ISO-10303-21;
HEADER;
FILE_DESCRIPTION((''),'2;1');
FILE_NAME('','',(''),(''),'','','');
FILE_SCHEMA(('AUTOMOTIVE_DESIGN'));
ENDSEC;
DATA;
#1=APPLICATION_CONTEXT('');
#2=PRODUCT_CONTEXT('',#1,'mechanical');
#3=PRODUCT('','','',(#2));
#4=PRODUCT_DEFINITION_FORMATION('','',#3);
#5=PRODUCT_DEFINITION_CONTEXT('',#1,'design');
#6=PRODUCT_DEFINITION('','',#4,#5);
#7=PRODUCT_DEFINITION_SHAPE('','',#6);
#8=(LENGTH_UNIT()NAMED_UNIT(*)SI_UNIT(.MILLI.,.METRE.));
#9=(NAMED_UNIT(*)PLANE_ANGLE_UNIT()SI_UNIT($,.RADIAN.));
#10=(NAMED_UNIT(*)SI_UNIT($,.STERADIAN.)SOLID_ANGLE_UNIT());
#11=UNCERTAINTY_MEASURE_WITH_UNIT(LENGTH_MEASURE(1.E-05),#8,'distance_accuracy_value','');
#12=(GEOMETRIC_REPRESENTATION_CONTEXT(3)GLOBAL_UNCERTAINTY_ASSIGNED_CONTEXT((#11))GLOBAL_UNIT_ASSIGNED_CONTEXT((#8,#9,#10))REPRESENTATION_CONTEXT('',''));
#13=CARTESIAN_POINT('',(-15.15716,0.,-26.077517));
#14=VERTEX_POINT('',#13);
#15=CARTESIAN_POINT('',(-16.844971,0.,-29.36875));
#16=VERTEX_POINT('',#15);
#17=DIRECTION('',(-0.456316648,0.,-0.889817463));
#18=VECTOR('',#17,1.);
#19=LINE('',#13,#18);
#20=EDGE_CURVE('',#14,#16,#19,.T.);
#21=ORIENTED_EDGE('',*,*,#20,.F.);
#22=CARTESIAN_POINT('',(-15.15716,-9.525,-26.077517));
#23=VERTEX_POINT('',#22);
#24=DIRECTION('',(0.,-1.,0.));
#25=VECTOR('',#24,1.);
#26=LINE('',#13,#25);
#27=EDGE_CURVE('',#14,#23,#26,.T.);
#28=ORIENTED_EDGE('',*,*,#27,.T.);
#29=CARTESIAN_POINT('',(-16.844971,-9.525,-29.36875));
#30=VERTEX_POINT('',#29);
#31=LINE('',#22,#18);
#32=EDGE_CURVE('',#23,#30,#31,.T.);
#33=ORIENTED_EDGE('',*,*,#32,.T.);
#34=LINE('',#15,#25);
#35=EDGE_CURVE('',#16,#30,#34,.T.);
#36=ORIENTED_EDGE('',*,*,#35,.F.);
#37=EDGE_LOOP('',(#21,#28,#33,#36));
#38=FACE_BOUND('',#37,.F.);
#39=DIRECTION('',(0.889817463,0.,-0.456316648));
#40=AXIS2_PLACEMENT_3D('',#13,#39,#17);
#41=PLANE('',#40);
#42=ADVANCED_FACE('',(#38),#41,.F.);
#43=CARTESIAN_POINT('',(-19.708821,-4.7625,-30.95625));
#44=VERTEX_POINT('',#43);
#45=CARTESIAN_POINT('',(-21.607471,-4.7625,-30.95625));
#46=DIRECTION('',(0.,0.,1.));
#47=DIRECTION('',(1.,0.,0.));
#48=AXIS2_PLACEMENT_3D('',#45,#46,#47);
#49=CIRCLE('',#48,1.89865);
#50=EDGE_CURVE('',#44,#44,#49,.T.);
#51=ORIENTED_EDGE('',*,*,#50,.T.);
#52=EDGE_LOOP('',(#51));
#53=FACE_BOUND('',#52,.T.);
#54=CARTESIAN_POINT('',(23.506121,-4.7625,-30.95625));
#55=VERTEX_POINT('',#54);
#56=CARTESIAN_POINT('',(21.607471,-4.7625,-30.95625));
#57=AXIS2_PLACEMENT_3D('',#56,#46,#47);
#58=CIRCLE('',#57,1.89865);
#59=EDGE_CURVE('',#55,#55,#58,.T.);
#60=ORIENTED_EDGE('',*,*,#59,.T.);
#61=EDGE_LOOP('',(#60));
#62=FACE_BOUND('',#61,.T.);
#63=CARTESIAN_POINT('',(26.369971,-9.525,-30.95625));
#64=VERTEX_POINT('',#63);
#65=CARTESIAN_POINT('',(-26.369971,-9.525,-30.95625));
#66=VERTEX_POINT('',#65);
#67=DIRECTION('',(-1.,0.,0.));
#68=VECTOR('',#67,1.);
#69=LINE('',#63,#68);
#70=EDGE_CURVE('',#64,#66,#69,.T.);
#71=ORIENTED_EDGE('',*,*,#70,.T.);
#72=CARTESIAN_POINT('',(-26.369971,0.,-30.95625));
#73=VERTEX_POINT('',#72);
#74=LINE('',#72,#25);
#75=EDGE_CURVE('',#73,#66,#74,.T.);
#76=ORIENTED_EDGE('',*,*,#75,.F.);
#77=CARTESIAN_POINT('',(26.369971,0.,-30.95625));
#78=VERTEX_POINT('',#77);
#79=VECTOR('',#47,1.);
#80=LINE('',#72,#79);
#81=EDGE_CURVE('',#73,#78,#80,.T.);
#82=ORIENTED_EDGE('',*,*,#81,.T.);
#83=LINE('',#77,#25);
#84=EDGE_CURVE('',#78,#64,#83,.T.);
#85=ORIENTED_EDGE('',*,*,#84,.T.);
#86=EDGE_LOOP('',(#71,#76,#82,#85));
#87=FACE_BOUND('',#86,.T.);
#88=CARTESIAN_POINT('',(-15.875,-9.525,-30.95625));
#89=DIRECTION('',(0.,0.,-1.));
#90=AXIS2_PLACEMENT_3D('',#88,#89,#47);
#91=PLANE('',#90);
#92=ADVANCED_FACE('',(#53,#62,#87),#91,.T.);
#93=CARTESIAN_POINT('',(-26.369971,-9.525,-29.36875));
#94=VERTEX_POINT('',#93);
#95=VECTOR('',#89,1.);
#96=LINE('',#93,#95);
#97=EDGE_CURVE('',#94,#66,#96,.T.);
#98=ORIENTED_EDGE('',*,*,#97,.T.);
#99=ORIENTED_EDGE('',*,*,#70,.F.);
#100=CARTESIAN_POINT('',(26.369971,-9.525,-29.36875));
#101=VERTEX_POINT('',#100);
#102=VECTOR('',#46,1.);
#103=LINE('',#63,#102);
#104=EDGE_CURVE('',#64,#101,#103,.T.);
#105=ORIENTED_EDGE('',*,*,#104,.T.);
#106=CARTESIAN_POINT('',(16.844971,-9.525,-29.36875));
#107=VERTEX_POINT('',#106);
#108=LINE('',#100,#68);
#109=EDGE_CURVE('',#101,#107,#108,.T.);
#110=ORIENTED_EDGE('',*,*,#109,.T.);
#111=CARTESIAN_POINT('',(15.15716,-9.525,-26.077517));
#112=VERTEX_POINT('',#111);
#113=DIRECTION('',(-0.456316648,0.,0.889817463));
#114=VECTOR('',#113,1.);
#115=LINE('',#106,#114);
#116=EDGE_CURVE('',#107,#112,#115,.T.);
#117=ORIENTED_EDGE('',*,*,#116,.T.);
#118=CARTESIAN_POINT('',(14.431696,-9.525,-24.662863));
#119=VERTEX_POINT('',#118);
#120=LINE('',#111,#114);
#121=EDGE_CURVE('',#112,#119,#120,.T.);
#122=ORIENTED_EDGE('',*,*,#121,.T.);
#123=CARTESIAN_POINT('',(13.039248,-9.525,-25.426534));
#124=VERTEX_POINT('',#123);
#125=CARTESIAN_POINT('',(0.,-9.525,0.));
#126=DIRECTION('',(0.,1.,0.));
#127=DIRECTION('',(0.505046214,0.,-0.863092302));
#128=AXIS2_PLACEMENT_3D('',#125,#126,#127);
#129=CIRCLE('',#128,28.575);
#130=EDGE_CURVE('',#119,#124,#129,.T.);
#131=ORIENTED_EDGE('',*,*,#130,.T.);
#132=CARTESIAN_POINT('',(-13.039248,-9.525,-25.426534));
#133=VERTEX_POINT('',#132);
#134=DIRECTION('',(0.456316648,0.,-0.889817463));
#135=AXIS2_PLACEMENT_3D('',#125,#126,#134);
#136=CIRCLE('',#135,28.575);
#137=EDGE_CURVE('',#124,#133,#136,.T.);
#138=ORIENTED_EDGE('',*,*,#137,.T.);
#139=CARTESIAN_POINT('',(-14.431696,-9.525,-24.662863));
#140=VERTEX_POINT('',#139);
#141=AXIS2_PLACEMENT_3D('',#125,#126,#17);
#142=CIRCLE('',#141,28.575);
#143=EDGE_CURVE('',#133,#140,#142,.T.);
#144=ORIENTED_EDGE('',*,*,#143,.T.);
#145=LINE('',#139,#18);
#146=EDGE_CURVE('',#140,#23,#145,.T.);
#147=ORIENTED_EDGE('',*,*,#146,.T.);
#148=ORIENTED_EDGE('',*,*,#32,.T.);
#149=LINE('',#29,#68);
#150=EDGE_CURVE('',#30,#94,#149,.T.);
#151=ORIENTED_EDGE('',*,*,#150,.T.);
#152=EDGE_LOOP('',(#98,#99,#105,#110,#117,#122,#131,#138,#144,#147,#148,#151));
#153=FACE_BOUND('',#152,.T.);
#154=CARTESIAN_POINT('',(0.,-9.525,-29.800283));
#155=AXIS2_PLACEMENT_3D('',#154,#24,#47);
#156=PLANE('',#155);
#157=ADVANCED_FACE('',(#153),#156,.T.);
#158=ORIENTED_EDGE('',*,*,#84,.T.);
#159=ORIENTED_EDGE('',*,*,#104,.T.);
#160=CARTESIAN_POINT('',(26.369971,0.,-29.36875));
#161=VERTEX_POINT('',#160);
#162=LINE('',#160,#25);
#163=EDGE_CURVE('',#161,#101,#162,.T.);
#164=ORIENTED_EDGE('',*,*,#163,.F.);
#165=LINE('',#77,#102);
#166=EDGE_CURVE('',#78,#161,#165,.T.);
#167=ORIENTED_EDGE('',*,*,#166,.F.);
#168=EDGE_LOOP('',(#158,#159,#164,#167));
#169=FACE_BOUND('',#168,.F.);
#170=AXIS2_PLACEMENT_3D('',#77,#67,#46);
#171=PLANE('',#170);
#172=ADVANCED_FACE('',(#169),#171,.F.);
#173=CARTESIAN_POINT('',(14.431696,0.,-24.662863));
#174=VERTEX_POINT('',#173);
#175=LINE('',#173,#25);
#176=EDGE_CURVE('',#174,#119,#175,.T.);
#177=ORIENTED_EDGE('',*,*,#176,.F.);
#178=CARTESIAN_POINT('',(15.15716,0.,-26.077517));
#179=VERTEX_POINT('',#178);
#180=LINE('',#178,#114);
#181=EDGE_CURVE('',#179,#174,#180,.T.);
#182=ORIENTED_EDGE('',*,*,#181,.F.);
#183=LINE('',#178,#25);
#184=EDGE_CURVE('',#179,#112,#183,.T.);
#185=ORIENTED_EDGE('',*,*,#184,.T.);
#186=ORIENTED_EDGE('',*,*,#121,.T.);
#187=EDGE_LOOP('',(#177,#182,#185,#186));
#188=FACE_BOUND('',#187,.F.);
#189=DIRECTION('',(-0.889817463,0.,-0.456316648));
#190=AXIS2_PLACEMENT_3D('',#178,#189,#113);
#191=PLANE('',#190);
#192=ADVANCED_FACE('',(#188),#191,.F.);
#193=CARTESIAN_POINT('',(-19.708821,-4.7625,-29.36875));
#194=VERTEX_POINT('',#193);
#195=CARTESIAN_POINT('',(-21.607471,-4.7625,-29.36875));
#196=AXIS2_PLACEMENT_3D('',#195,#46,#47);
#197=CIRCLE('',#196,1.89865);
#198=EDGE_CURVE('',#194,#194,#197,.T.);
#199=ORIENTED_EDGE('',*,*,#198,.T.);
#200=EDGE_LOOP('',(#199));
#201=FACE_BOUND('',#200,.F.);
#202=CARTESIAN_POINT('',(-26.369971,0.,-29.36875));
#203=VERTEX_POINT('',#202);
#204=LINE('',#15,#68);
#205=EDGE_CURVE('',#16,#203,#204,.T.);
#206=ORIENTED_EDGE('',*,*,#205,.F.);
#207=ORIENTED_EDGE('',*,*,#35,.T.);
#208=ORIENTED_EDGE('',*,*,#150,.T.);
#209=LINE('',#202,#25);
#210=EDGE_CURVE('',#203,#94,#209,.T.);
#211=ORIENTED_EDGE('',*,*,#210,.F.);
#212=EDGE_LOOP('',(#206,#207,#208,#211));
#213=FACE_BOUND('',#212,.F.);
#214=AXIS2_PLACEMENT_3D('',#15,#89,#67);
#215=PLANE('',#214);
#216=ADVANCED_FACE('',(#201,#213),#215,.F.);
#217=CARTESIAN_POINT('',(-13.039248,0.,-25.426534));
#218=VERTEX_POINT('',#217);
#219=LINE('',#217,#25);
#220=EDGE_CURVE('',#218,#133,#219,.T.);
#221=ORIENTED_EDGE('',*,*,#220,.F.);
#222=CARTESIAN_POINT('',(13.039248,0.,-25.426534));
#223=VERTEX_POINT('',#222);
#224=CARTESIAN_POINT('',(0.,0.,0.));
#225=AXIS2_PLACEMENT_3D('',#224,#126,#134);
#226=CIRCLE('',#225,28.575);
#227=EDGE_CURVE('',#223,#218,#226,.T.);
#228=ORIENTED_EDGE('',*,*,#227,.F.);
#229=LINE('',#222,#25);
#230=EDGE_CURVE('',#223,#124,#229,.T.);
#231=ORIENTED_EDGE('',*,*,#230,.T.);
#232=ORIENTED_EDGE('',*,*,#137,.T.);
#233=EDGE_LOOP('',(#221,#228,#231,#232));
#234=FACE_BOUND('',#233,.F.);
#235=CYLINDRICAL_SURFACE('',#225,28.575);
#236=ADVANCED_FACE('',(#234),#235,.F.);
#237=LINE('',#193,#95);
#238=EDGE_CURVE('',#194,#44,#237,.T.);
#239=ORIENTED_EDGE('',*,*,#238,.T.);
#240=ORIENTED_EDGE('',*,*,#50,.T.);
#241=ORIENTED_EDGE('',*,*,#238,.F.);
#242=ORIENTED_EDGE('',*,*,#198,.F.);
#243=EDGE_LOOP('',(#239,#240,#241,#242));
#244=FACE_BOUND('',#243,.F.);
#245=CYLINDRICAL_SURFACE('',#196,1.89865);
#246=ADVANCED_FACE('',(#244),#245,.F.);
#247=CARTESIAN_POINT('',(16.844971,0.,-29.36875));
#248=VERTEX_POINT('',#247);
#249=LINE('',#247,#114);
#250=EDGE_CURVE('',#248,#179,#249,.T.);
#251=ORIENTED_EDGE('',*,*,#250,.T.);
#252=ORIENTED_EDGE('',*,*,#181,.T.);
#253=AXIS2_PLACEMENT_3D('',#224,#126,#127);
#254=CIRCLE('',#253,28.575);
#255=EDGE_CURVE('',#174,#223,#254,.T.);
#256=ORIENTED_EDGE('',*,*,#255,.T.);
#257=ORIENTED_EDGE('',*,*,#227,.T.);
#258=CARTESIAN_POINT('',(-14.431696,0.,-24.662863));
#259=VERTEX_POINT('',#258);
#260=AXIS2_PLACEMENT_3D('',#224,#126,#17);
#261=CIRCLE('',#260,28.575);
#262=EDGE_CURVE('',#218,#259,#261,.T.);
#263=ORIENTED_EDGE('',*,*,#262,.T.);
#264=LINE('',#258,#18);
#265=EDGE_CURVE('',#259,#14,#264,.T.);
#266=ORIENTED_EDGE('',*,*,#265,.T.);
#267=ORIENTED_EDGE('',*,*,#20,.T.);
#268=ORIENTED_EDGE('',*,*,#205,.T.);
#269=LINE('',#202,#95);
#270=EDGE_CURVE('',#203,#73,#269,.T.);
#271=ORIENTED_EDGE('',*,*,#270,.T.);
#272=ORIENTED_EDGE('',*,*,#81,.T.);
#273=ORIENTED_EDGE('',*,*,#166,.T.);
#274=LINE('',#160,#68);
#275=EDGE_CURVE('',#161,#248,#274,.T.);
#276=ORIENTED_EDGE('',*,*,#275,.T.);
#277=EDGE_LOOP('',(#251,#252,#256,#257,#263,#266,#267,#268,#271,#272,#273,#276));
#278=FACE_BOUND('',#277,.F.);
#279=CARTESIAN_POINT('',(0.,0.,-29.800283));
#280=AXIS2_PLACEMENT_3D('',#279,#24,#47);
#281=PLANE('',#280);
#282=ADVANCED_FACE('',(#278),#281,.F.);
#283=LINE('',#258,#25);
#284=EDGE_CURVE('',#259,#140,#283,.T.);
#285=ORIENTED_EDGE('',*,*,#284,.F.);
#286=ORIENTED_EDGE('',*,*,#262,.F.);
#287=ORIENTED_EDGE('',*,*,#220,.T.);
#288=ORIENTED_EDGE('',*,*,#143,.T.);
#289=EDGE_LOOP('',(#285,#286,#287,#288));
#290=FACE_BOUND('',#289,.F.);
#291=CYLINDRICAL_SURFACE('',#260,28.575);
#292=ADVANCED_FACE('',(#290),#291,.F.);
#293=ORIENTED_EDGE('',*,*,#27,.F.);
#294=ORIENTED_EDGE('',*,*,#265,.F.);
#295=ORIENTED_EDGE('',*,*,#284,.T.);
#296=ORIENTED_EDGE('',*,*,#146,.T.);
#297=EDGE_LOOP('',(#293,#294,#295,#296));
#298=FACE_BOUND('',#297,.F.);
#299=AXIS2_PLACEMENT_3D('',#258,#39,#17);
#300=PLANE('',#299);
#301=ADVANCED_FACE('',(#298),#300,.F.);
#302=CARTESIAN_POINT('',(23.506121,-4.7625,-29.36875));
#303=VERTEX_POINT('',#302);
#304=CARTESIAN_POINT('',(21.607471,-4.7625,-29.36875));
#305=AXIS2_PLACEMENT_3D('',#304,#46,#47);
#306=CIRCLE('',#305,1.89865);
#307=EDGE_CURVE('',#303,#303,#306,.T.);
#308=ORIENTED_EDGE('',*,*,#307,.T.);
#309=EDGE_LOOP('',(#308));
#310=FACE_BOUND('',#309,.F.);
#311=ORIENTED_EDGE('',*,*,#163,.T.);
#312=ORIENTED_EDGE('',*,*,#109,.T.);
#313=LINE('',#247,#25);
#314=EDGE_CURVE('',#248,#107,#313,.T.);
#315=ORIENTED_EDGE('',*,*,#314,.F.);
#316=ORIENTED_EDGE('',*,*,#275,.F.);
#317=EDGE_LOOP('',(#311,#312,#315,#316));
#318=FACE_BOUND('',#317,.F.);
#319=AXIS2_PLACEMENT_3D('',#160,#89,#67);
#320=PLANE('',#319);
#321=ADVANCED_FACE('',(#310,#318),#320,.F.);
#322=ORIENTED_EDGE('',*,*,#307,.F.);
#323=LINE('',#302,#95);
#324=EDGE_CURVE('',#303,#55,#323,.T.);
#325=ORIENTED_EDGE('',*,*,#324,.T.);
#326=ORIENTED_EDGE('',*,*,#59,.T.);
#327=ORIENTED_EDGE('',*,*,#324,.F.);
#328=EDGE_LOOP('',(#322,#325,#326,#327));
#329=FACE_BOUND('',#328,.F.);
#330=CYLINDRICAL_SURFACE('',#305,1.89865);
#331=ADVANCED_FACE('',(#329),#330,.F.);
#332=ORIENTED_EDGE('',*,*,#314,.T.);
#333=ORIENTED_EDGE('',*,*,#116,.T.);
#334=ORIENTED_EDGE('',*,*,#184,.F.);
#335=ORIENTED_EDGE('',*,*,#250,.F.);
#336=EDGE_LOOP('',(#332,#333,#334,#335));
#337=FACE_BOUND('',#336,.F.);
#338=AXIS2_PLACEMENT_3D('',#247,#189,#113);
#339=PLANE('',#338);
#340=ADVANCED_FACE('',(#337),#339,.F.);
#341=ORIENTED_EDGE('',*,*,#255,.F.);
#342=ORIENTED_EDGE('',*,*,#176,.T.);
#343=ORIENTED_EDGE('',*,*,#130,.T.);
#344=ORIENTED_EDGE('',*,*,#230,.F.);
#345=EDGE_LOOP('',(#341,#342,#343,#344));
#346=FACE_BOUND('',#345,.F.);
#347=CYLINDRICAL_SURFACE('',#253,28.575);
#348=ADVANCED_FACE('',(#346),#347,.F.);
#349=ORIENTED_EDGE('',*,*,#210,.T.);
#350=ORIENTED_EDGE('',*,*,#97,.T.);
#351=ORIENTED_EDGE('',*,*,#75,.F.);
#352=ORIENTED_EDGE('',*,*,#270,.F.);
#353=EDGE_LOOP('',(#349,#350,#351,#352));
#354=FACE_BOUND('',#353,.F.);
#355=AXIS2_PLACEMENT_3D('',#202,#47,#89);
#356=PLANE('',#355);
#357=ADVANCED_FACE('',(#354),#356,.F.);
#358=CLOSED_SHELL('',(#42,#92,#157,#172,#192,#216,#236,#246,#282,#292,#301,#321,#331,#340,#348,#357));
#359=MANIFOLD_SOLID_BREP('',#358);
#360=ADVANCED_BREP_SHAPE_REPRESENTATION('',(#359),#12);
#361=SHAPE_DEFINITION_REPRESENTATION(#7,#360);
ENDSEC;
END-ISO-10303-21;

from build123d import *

# Parameters (mm, degrees)
F1_DEPTH = 9.525
F2_R     = 1.89865
F3_DEPTH = 1.5885
F5_DEPTH = 9.525


with BuildPart() as f1:
    # F0 (on Front) → F1 (new body)
    with BuildSketch(Plane.XZ):
        with BuildLine():
            ThreePointArc((13.0392482051, -25.4265339999), (0, -28.575), (-13.0392482051, -25.4265339999))
            Line((-13.0392482051, -25.4265339999), (-13.7636508831, -26.8391192221))
            ThreePointArc((-13.7636508831, -26.8391192221), (0, -30.1625), (13.7636508831, -26.8391192221))
            Line((13.7636508831, -26.8391192221), (13.0392482051, -25.4265339999))
        make_face()
        with BuildLine():
            Line((15.157159657, -26.0775174697), (14.4316955802, -24.66286252))
            ThreePointArc((14.4316955802, -24.66286252), (13.7407782402, -25.0543736372), (13.0392482051, -25.4265339999))
            Line((13.0392482051, -25.4265339999), (13.7636508831, -26.8391192221))
            ThreePointArc((13.7636508831, -26.8391192221), (14.4654184136, -26.4674909345), (15.157159657, -26.0775174697))
        make_face()
        with BuildLine():
            Line((16.844971211, -29.36875), (15.157159657, -26.0775174697))
            ThreePointArc((15.157159657, -26.0775174697), (14.4654184136, -26.4674909345), (13.7636508831, -26.8391192221))
            Line((13.7636508831, -26.8391192221), (15.875, -30.95625))
            Line((15.875, -30.95625), (26.369971211, -30.95625))
            Line((26.369971211, -30.95625), (26.369971211, -29.36875))
            Line((26.369971211, -29.36875), (16.844971211, -29.36875))
        make_face()
        with BuildLine():
            ThreePointArc((-13.0392482051, -25.4265339999), (-13.7407782402, -25.0543736372), (-14.4316955802, -24.66286252))
            Line((-14.4316955802, -24.66286252), (-15.157159657, -26.0775174697))
            ThreePointArc((-15.157159657, -26.0775174697), (-14.4654184136, -26.4674909345), (-13.7636508831, -26.8391192221))
            Line((-13.7636508831, -26.8391192221), (-13.0392482051, -25.4265339999))
        make_face()
        with BuildLine():
            ThreePointArc((-13.7636508831, -26.8391192221), (-14.4654184136, -26.4674909345), (-15.157159657, -26.0775174697))
            Line((-15.157159657, -26.0775174697), (-16.844971211, -29.36875))
            Line((-16.844971211, -29.36875), (-26.369971211, -29.36875))
            Line((-26.369971211, -29.36875), (-26.369971211, -30.95625))
            Line((-26.369971211, -30.95625), (-15.875, -30.95625))
            Line((-15.875, -30.95625), (-13.7636508831, -26.8391192221))
        make_face()
    extrude(amount=F1_DEPTH)

    # F2 (on face) → F3 (cut, through all)
    with BuildSketch(Plane.XY.offset(-29.36875)):
        with Locations((21.607471211, -4.7625)):
            Circle(F2_R)
        with Locations((-21.607471211, -4.7625)):
            Circle(F2_R)
    extrude(amount=-F3_DEPTH, mode=Mode.SUBTRACT)

    # F4 (on face) → F5 (join, through all)
    with BuildSketch(Plane.XZ.offset(9.525)):
        with BuildLine():
            Line((-13.7636508831, -26.8391192221), (-15.875, -30.95625))
            Line((-15.875, -30.95625), (15.875, -30.95625))
            Line((15.875, -30.95625), (13.7636508831, -26.8391192221))
            ThreePointArc((13.7636508831, -26.8391192221), (0, -30.1625), (-13.7636508831, -26.8391192221))
        make_face()
    extrude(amount=-F5_DEPTH)


solid = f1.part
